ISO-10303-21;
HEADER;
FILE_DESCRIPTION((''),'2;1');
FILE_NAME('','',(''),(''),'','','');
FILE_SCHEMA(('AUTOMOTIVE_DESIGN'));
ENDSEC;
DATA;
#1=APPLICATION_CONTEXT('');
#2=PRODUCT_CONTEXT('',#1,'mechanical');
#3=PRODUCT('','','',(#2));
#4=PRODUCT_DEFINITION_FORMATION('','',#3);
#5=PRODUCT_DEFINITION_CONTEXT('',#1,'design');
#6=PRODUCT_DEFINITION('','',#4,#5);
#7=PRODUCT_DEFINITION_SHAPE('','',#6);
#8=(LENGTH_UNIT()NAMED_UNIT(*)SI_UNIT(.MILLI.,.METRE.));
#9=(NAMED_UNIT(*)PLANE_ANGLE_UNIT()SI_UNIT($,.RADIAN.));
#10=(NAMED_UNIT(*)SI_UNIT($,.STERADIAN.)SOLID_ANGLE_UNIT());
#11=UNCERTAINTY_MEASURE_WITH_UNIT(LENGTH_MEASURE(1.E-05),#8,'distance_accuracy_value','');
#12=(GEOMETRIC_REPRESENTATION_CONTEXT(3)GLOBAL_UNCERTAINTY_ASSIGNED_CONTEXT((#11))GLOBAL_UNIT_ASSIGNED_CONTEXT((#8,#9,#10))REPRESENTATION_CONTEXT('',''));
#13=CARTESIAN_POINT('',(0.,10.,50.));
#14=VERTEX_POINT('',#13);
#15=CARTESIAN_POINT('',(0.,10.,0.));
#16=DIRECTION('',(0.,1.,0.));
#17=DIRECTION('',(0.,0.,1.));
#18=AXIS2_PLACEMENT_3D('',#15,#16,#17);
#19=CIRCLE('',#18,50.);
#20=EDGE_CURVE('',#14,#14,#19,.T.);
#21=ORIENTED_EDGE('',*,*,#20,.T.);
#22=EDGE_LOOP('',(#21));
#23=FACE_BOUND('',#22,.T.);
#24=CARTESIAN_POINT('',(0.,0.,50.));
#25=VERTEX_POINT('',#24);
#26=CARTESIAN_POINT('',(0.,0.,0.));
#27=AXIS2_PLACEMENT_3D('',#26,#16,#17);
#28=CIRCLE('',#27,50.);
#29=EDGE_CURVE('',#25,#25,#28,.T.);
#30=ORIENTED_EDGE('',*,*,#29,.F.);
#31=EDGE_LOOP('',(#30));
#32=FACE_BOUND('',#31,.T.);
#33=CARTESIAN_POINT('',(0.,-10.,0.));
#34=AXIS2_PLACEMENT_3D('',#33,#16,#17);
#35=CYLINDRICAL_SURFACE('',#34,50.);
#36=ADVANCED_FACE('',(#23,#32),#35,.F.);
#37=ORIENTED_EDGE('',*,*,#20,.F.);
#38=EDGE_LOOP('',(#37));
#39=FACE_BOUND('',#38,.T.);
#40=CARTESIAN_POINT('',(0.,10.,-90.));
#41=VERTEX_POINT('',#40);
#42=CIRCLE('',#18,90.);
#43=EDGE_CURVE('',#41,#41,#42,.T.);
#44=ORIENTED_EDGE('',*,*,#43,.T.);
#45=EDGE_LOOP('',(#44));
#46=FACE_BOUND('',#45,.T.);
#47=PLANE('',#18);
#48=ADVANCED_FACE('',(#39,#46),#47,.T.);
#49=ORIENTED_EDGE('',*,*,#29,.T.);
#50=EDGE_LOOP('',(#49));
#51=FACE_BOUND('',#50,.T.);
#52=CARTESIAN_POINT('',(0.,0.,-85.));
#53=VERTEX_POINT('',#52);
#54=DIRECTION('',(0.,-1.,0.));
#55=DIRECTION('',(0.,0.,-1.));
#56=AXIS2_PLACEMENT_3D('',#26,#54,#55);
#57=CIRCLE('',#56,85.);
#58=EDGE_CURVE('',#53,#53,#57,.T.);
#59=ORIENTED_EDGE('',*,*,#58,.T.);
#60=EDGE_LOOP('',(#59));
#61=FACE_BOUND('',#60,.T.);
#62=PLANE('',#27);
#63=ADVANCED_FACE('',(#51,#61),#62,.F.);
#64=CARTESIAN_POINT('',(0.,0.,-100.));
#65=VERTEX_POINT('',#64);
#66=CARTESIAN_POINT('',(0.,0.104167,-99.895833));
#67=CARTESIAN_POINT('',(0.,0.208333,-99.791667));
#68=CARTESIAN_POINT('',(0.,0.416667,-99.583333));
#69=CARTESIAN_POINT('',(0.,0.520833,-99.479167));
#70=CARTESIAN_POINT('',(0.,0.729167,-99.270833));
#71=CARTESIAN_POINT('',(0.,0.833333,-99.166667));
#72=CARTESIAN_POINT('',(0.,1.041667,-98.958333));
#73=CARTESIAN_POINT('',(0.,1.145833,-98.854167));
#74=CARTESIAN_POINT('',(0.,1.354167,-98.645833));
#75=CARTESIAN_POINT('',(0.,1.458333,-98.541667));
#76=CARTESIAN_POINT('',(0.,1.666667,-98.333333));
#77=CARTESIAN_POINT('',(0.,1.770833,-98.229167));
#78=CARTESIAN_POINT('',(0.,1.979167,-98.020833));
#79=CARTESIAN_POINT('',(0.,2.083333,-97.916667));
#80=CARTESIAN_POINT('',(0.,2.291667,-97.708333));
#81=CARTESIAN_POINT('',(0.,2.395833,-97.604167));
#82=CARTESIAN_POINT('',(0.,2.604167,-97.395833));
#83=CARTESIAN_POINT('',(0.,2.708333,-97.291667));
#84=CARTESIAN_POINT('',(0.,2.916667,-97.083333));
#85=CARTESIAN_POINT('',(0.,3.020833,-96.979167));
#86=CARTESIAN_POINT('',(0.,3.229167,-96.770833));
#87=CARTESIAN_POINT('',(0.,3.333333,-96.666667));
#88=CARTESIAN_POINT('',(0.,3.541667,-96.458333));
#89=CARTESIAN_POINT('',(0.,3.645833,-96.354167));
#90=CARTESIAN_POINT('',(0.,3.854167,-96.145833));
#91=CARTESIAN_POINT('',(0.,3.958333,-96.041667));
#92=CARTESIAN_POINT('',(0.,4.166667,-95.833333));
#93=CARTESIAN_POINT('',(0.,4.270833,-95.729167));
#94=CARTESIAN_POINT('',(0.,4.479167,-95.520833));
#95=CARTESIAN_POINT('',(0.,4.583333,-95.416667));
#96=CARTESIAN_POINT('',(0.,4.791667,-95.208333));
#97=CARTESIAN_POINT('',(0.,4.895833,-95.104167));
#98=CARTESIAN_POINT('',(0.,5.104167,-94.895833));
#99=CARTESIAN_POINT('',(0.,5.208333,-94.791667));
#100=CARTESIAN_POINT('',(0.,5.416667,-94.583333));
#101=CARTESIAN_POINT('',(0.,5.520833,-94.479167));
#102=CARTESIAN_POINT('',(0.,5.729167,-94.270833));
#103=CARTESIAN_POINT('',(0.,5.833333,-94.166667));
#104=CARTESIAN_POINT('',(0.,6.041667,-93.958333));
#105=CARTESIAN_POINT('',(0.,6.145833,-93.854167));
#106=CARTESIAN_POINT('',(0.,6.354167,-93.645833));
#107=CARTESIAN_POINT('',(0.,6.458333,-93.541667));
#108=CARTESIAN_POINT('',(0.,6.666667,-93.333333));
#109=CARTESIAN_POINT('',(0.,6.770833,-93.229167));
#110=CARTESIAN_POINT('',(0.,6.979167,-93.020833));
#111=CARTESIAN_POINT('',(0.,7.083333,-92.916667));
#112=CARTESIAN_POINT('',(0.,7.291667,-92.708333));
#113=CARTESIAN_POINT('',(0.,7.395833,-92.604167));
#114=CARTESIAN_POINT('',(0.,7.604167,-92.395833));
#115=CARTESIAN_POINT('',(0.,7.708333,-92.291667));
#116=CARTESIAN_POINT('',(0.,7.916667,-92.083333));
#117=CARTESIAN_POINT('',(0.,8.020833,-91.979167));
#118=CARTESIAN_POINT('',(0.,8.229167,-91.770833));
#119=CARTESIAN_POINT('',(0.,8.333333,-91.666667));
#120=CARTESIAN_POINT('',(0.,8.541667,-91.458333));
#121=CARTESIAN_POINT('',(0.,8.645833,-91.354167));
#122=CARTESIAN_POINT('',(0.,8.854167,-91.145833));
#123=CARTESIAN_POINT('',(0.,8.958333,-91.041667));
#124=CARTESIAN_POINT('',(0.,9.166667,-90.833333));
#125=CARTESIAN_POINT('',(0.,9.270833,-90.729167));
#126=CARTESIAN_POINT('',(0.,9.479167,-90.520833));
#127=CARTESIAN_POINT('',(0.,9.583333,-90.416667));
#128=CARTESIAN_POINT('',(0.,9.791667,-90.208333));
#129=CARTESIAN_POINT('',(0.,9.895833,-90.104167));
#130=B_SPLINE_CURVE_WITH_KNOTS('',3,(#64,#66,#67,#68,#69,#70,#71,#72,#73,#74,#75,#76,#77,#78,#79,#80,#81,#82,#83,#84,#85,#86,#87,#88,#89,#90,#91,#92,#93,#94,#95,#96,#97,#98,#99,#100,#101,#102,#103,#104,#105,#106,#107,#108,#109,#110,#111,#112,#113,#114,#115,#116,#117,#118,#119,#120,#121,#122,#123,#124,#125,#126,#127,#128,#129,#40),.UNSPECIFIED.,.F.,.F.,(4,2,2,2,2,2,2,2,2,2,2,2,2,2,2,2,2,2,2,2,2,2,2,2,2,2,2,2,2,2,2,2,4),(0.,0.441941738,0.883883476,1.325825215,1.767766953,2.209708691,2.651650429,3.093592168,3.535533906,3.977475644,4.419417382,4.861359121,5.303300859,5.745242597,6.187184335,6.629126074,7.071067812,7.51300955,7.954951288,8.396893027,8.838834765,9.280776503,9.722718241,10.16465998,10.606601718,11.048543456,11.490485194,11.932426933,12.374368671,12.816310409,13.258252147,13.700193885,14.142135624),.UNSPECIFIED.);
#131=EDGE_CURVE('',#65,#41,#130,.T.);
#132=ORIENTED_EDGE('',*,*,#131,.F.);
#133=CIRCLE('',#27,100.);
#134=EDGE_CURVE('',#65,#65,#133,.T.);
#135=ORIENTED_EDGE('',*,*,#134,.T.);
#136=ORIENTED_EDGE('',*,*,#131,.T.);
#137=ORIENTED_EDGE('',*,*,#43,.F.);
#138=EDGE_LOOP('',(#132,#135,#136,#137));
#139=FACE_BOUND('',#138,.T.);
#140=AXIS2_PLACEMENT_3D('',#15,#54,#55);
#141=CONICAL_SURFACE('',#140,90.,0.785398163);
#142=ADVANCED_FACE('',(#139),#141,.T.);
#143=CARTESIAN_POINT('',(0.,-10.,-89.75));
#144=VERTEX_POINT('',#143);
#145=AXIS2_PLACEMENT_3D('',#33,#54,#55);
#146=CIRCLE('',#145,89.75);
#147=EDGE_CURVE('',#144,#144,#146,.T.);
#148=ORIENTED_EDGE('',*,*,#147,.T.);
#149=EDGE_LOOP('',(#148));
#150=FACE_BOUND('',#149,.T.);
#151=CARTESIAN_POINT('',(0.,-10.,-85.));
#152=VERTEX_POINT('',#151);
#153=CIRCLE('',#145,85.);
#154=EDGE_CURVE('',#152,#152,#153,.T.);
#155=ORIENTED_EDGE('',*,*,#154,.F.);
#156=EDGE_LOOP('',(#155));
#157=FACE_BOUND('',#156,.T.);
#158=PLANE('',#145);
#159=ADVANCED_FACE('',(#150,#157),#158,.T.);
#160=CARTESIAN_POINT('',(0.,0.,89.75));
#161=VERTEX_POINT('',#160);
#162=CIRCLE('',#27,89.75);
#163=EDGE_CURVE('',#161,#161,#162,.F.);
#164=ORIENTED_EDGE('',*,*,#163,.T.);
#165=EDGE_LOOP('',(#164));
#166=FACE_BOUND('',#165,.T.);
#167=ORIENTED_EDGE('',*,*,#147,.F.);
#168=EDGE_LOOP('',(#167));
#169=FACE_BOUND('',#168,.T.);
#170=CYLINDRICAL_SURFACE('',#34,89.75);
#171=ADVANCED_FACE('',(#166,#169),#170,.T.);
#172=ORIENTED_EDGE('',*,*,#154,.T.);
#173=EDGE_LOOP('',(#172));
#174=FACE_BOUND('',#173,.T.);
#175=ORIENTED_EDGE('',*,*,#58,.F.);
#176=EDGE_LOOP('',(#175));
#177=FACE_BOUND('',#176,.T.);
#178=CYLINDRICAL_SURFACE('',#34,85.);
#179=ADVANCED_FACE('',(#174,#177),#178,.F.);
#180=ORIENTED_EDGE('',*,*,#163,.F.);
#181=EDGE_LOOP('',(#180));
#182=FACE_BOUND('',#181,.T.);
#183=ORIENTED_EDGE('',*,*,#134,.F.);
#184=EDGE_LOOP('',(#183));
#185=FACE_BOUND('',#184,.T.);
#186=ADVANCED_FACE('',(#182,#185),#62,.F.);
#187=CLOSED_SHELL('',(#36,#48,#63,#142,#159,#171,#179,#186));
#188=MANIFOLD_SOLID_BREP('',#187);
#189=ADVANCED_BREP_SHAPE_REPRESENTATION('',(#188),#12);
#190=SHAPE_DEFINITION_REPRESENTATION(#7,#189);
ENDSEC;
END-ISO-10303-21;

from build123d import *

# Parameters (mm, degrees)
SKETCH1_R           = 100
BOSS_EXTRUDE1_DEPTH = 10
CHAMFER1_SIZE       = 10
SKETCH2_R           = 89.75
SKETCH2_R_2         = 85
BOSS_EXTRUDE2_DEPTH = 10
SKETCH3_R           = 50
CUT_EXTRUDE1_DEPTH  = 20


with BuildPart() as part:
    # Sketch1 → Boss-Extrude1 (new body)
    with BuildSketch(Plane(origin=(0, 0, 0), x_dir=(1, 0, 0), z_dir=(0, 1, 0))):
        with Locations(Location((0, 0, 0), (0, 0, 270))):
            Circle(SKETCH1_R)
    extrude(amount=BOSS_EXTRUDE1_DEPTH)

    # Chamfer1
    chamfer1_edges = [part.edges().sort_by_distance(p)[0] for p in [
        (0, 10, -100),
    ]]
    chamfer(chamfer1_edges, length=CHAMFER1_SIZE - 0.0001)  # a hair under: the kernel refuses the full size

    # Sketch2 → Boss-Extrude2 (add)
    with BuildSketch(Plane.XZ):
        with Locations(Location((0, 0, 0), (0, 0, 90))):
            Circle(SKETCH2_R)
        with Locations(Location((0, 0, 0), (0, 0, 270))):
            Circle(SKETCH2_R_2, mode=Mode.SUBTRACT)
    extrude(amount=BOSS_EXTRUDE2_DEPTH)

    # Sketch3 → Cut-Extrude1 (cut)
    with BuildSketch(Plane(origin=(0, 10, 0), x_dir=(1, 0, 0), z_dir=(0, 1, 0))):
        with Locations(Location((0, 0, 0), (0, 0, 270))):
            Circle(SKETCH3_R)
    extrude(amount=-CUT_EXTRUDE1_DEPTH, mode=Mode.SUBTRACT)


solid = part.part
